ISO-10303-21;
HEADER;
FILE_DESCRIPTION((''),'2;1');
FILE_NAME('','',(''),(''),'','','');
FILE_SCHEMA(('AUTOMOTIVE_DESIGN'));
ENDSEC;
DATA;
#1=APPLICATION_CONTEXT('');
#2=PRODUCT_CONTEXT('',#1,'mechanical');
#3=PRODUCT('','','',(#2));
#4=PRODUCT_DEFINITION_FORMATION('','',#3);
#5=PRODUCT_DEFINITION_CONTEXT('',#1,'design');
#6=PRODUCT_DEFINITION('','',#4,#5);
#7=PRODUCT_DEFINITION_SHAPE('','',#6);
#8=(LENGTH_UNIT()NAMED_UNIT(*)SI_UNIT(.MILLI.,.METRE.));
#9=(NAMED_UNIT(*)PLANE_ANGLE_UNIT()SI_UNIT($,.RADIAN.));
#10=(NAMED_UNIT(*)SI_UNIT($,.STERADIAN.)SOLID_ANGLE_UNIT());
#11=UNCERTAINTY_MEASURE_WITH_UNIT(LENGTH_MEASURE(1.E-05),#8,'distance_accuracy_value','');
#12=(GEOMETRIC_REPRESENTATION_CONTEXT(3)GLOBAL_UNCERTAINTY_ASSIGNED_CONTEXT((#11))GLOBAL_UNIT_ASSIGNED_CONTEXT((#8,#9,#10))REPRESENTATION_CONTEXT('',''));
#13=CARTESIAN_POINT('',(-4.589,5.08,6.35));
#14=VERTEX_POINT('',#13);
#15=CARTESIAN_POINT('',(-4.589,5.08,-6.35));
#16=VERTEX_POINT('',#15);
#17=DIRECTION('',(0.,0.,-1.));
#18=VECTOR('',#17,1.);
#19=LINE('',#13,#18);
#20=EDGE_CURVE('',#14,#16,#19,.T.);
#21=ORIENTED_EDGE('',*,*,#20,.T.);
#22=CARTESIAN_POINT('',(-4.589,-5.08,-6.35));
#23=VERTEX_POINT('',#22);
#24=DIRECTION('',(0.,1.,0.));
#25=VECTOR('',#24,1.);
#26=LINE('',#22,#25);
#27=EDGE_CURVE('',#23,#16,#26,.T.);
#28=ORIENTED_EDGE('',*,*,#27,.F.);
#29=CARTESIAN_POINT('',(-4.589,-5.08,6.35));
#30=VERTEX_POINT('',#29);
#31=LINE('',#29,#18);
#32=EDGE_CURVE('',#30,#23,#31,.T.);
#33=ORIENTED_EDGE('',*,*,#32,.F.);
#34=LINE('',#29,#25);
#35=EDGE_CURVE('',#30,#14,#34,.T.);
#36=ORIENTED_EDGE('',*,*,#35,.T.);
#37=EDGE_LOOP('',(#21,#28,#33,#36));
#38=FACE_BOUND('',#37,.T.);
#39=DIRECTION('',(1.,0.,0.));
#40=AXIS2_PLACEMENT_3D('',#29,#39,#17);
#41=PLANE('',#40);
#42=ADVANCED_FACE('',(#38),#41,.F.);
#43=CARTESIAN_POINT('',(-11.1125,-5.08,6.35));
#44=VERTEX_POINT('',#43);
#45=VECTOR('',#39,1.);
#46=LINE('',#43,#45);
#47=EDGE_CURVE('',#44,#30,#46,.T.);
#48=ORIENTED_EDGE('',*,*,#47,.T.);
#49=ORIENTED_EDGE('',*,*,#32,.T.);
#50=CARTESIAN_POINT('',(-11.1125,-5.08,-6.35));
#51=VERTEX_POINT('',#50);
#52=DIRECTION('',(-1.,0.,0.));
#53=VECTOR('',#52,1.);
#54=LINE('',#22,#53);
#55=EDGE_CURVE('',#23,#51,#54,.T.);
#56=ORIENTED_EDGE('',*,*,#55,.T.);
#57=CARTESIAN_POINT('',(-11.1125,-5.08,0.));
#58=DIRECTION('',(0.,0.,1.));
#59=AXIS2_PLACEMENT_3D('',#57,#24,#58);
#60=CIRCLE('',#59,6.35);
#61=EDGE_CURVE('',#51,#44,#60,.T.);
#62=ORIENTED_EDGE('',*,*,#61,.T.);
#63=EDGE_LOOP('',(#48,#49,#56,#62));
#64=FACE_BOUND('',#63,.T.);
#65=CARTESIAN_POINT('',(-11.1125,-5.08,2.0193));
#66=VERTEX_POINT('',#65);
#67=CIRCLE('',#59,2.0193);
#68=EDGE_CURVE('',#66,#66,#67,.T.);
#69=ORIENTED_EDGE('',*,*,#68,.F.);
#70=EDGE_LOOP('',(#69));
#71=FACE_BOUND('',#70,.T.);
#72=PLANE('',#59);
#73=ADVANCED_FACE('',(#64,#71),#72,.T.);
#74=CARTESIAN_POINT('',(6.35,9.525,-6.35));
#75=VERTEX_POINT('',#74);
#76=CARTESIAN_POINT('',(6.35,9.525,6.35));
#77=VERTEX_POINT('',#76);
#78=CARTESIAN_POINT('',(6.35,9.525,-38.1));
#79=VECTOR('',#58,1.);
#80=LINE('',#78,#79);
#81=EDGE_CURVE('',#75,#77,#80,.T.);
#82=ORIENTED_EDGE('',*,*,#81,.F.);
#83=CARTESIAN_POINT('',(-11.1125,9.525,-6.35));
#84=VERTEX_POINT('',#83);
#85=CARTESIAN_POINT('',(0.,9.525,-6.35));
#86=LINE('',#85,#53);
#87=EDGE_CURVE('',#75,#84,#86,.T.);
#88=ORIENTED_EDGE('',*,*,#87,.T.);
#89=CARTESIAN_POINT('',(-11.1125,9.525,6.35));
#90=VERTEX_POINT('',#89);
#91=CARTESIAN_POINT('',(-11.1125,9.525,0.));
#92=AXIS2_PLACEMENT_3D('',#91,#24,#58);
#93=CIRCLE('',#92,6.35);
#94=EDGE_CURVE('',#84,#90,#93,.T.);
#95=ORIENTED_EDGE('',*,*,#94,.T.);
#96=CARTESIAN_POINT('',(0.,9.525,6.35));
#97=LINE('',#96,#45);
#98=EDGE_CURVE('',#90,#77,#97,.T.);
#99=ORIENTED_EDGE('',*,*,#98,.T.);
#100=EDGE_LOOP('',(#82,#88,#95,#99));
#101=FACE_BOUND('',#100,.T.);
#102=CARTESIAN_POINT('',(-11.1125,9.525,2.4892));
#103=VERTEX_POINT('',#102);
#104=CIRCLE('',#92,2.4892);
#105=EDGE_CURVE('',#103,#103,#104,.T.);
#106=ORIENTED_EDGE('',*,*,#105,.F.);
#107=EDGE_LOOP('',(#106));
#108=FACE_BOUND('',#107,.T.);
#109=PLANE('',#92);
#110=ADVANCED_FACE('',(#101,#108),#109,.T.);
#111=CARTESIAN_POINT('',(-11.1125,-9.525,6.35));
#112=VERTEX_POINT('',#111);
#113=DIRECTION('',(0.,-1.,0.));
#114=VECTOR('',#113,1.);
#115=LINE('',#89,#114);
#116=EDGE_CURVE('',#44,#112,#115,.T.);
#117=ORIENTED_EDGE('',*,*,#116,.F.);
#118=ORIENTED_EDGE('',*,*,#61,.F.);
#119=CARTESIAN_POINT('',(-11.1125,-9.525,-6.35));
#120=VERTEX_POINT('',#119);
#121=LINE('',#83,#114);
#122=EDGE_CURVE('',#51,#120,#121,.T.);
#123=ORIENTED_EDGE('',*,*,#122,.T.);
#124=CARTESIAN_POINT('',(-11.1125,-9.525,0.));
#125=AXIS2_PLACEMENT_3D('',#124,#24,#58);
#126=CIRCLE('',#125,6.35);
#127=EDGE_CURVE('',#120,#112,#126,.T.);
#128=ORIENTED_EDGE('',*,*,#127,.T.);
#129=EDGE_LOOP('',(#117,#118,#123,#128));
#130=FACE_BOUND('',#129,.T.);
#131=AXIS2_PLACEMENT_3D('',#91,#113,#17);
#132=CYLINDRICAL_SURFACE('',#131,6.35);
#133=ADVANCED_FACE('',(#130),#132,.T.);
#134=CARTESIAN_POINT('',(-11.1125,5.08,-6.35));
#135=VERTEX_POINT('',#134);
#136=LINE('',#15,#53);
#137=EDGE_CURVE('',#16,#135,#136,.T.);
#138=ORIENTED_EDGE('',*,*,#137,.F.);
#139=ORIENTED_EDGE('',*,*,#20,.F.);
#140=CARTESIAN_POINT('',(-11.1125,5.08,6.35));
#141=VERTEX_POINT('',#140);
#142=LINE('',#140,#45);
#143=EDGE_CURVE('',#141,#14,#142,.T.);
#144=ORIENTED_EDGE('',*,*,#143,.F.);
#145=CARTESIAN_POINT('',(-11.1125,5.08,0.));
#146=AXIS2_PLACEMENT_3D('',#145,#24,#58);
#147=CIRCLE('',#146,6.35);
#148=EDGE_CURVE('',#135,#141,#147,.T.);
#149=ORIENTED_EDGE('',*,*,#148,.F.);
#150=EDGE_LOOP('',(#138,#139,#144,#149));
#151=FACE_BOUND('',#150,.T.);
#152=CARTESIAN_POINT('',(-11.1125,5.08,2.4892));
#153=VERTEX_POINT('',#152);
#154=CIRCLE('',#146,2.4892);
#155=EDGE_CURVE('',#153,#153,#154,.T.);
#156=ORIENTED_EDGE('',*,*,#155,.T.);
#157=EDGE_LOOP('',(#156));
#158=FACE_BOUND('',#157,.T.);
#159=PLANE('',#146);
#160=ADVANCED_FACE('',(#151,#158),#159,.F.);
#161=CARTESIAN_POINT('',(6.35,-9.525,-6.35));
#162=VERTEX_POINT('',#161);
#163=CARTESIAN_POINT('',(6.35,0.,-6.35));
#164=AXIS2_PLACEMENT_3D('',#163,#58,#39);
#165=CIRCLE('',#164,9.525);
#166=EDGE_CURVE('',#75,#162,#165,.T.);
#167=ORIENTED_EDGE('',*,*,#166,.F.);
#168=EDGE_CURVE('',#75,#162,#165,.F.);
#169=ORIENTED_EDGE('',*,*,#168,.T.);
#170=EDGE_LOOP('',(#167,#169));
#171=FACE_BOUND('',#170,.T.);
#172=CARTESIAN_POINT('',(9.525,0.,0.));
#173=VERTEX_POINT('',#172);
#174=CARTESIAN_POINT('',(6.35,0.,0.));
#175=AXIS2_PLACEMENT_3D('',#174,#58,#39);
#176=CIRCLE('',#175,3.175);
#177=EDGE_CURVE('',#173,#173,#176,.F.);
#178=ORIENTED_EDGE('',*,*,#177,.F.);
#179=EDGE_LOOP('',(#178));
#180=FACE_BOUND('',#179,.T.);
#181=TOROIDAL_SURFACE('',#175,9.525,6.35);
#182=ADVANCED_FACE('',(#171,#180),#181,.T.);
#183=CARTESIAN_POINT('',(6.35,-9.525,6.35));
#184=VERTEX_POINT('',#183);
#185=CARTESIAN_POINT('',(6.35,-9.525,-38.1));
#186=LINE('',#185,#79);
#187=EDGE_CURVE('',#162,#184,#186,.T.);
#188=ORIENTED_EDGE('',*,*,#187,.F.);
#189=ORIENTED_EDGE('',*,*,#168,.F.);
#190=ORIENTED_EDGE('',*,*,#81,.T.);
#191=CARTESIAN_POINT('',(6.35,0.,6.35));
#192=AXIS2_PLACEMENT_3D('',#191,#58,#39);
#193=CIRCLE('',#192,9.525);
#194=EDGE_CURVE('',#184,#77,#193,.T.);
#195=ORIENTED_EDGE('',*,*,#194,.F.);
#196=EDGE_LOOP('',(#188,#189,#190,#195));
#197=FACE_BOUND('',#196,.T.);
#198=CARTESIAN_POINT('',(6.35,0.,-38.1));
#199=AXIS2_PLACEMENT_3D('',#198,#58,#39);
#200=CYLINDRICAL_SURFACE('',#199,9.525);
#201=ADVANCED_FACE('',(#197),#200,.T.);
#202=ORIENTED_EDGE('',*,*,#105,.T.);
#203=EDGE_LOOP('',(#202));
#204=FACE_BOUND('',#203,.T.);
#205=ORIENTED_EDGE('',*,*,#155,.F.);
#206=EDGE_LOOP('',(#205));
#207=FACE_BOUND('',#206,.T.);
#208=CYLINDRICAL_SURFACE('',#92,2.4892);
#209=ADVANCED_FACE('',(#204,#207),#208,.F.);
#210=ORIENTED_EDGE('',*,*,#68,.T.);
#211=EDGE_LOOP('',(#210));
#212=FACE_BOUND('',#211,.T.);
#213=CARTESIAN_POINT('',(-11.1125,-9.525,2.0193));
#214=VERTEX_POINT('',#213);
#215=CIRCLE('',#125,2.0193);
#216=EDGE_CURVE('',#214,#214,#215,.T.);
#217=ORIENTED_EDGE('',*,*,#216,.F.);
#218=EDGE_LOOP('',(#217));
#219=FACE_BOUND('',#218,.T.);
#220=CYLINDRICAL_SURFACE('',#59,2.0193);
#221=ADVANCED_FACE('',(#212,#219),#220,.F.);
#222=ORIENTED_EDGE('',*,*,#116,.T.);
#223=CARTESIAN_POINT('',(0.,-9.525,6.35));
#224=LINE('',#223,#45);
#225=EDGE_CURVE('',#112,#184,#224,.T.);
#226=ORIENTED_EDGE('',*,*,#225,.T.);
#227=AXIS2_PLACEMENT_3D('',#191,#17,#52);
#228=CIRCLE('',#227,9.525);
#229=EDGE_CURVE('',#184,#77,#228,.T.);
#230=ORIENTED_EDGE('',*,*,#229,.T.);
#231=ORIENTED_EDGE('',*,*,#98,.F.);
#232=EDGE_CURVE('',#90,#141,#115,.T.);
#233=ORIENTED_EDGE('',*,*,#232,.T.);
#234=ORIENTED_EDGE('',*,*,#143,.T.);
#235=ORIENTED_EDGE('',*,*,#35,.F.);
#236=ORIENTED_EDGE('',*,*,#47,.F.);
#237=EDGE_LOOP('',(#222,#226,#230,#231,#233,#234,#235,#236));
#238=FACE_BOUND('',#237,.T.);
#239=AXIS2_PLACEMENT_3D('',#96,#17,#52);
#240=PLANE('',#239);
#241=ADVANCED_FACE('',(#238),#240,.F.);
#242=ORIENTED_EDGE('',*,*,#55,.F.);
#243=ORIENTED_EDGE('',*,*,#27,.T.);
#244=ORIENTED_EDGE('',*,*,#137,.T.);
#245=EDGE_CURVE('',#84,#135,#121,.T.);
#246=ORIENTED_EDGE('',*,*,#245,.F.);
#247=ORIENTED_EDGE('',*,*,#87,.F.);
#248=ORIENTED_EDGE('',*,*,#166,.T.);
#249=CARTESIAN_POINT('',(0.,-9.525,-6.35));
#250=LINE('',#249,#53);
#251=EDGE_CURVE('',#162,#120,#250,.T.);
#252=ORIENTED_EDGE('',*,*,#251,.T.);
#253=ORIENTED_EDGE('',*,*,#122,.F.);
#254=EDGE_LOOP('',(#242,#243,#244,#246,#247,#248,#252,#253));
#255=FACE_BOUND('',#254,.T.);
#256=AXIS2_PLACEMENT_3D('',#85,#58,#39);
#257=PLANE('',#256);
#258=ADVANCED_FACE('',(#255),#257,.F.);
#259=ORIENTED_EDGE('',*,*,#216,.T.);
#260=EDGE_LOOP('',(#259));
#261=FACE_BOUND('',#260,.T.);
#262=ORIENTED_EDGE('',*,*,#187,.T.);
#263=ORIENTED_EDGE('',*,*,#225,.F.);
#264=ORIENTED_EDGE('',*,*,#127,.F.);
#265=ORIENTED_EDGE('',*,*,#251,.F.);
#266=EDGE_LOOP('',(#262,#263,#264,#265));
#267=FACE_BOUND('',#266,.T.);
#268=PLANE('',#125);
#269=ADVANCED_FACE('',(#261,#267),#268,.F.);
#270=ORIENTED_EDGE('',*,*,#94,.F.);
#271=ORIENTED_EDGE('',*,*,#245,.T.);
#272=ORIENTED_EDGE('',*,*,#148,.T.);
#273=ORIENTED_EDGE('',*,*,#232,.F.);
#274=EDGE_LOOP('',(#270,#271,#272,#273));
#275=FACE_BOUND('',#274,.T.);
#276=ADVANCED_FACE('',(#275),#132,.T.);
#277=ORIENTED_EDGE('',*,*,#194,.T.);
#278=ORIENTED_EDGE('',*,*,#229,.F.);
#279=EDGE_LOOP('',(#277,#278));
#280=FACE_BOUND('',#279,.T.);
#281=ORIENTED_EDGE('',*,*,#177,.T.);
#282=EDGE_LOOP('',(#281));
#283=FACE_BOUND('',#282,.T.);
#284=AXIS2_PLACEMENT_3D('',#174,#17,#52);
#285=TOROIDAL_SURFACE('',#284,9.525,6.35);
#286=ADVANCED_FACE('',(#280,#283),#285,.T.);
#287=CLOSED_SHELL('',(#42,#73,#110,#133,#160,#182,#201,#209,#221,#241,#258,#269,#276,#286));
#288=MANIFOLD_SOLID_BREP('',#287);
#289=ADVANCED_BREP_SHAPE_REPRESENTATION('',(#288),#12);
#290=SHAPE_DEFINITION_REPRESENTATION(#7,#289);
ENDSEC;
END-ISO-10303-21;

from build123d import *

# Parameters (mm, degrees)
BOSS_EXTRUDE1_DEPTH         = 9.525
BOSS_EXTRUDE2_DEPTH         = 12.7
CUT_EXTRUDE1_DEPTH          = 5.08
F_10_32_TAPPED_HOLE1_D      = 4.0386
F_10_32_TAPPED_HOLE1_DEPTH  = 4.445
F_10_CLEARANCE_HOLE1_D      = 4.9784
F_10_CLEARANCE_HOLE1_DEPTH  = 14.604
F_1_4_0_25_DIAMETER_HOLE1_D = 6.35
FILLET1_R                   = 6.35


with BuildPart() as part:
    # Sketch1 → Boss-Extrude1 (new, symmetric)
    with BuildSketch(Plane(origin=(0, 0, 0), x_dir=(1, 0, 0), z_dir=(0, 1, 0))):
        with BuildLine():
            Line((0, -6.35), (-11.1125, -6.35))
            ThreePointArc((-11.1125, -6.35), (-17.4625, 0), (-11.1125, 6.35))
            Line((-11.1125, 6.35), (0, 6.35))
            Line((0, 6.35), (0, -6.35))
        make_face()
    extrude(amount=BOSS_EXTRUDE1_DEPTH, both=True)

    # Sketch2 → Boss-Extrude2 (add)
    with BuildSketch(Plane.XY.offset(6.35)):
        with BuildLine():
            Line((0, 9.525), (6.35, 9.525))
            ThreePointArc((6.35, 9.525), (15.875, 0), (6.35, -9.525))
            Line((6.35, -9.525), (0, -9.525))
            ThreePointArc((0, -9.525), (-9.525, 0), (0, 9.525))
        make_face()
    extrude(amount=-BOSS_EXTRUDE2_DEPTH)

    # Sketch3 → Cut-Extrude1 (cut, symmetric)
    with BuildSketch(Plane(origin=(0, 0, 0), x_dir=(1, 0, 0), z_dir=(0, 1, 0))):
        with BuildLine():
            Line((-4.588999966, 6.35), (-11.1125, 6.35))
            ThreePointArc((-11.1125, 6.35), (-17.4625, 0), (-11.1125, -6.35))
            Line((-11.1125, -6.35), (-4.588999966, -6.35))
            Line((-4.588999966, -6.35), (-4.588999966, 6.35))
        make_face()
    extrude(amount=CUT_EXTRUDE1_DEPTH, both=True, mode=Mode.SUBTRACT)

    # #10-32 Tapped Hole1
    with Locations(Plane(origin=(0, -5.08, 0), x_dir=(1, 0, 0), z_dir=(0, 1, 0))):
        with Locations((-11.1125, 0)):
            Hole(F_10_32_TAPPED_HOLE1_D / 2, depth=F_10_32_TAPPED_HOLE1_DEPTH)

    # #10 Clearance Hole1
    with Locations(Plane(origin=(0, 9.525, 0), x_dir=(1, 0, 0), z_dir=(0, 1, 0))):
        with Locations((-11.1125, 0)):
            Hole(F_10_CLEARANCE_HOLE1_D / 2, depth=F_10_CLEARANCE_HOLE1_DEPTH)

    # 1/4 (0.25) Diameter Hole1 (through all)
    with Locations(Plane(origin=(0, 0, -6.35), x_dir=(-1, 0, 0), z_dir=(0, 0, -1))):
        with Locations((-6.35, 0)):
            Hole(F_1_4_0_25_DIAMETER_HOLE1_D / 2)

    # Fillet1
    fillet1_edges = [part.edges().sort_by_distance(p)[0] for p in [
        (3.175, 0, -6.35),
        (3.175, 0, 6.35),
    ]]
    fillet(fillet1_edges, radius=FILLET1_R - 0.0001)  # a hair under: the kernel refuses the full size


solid = part.part
